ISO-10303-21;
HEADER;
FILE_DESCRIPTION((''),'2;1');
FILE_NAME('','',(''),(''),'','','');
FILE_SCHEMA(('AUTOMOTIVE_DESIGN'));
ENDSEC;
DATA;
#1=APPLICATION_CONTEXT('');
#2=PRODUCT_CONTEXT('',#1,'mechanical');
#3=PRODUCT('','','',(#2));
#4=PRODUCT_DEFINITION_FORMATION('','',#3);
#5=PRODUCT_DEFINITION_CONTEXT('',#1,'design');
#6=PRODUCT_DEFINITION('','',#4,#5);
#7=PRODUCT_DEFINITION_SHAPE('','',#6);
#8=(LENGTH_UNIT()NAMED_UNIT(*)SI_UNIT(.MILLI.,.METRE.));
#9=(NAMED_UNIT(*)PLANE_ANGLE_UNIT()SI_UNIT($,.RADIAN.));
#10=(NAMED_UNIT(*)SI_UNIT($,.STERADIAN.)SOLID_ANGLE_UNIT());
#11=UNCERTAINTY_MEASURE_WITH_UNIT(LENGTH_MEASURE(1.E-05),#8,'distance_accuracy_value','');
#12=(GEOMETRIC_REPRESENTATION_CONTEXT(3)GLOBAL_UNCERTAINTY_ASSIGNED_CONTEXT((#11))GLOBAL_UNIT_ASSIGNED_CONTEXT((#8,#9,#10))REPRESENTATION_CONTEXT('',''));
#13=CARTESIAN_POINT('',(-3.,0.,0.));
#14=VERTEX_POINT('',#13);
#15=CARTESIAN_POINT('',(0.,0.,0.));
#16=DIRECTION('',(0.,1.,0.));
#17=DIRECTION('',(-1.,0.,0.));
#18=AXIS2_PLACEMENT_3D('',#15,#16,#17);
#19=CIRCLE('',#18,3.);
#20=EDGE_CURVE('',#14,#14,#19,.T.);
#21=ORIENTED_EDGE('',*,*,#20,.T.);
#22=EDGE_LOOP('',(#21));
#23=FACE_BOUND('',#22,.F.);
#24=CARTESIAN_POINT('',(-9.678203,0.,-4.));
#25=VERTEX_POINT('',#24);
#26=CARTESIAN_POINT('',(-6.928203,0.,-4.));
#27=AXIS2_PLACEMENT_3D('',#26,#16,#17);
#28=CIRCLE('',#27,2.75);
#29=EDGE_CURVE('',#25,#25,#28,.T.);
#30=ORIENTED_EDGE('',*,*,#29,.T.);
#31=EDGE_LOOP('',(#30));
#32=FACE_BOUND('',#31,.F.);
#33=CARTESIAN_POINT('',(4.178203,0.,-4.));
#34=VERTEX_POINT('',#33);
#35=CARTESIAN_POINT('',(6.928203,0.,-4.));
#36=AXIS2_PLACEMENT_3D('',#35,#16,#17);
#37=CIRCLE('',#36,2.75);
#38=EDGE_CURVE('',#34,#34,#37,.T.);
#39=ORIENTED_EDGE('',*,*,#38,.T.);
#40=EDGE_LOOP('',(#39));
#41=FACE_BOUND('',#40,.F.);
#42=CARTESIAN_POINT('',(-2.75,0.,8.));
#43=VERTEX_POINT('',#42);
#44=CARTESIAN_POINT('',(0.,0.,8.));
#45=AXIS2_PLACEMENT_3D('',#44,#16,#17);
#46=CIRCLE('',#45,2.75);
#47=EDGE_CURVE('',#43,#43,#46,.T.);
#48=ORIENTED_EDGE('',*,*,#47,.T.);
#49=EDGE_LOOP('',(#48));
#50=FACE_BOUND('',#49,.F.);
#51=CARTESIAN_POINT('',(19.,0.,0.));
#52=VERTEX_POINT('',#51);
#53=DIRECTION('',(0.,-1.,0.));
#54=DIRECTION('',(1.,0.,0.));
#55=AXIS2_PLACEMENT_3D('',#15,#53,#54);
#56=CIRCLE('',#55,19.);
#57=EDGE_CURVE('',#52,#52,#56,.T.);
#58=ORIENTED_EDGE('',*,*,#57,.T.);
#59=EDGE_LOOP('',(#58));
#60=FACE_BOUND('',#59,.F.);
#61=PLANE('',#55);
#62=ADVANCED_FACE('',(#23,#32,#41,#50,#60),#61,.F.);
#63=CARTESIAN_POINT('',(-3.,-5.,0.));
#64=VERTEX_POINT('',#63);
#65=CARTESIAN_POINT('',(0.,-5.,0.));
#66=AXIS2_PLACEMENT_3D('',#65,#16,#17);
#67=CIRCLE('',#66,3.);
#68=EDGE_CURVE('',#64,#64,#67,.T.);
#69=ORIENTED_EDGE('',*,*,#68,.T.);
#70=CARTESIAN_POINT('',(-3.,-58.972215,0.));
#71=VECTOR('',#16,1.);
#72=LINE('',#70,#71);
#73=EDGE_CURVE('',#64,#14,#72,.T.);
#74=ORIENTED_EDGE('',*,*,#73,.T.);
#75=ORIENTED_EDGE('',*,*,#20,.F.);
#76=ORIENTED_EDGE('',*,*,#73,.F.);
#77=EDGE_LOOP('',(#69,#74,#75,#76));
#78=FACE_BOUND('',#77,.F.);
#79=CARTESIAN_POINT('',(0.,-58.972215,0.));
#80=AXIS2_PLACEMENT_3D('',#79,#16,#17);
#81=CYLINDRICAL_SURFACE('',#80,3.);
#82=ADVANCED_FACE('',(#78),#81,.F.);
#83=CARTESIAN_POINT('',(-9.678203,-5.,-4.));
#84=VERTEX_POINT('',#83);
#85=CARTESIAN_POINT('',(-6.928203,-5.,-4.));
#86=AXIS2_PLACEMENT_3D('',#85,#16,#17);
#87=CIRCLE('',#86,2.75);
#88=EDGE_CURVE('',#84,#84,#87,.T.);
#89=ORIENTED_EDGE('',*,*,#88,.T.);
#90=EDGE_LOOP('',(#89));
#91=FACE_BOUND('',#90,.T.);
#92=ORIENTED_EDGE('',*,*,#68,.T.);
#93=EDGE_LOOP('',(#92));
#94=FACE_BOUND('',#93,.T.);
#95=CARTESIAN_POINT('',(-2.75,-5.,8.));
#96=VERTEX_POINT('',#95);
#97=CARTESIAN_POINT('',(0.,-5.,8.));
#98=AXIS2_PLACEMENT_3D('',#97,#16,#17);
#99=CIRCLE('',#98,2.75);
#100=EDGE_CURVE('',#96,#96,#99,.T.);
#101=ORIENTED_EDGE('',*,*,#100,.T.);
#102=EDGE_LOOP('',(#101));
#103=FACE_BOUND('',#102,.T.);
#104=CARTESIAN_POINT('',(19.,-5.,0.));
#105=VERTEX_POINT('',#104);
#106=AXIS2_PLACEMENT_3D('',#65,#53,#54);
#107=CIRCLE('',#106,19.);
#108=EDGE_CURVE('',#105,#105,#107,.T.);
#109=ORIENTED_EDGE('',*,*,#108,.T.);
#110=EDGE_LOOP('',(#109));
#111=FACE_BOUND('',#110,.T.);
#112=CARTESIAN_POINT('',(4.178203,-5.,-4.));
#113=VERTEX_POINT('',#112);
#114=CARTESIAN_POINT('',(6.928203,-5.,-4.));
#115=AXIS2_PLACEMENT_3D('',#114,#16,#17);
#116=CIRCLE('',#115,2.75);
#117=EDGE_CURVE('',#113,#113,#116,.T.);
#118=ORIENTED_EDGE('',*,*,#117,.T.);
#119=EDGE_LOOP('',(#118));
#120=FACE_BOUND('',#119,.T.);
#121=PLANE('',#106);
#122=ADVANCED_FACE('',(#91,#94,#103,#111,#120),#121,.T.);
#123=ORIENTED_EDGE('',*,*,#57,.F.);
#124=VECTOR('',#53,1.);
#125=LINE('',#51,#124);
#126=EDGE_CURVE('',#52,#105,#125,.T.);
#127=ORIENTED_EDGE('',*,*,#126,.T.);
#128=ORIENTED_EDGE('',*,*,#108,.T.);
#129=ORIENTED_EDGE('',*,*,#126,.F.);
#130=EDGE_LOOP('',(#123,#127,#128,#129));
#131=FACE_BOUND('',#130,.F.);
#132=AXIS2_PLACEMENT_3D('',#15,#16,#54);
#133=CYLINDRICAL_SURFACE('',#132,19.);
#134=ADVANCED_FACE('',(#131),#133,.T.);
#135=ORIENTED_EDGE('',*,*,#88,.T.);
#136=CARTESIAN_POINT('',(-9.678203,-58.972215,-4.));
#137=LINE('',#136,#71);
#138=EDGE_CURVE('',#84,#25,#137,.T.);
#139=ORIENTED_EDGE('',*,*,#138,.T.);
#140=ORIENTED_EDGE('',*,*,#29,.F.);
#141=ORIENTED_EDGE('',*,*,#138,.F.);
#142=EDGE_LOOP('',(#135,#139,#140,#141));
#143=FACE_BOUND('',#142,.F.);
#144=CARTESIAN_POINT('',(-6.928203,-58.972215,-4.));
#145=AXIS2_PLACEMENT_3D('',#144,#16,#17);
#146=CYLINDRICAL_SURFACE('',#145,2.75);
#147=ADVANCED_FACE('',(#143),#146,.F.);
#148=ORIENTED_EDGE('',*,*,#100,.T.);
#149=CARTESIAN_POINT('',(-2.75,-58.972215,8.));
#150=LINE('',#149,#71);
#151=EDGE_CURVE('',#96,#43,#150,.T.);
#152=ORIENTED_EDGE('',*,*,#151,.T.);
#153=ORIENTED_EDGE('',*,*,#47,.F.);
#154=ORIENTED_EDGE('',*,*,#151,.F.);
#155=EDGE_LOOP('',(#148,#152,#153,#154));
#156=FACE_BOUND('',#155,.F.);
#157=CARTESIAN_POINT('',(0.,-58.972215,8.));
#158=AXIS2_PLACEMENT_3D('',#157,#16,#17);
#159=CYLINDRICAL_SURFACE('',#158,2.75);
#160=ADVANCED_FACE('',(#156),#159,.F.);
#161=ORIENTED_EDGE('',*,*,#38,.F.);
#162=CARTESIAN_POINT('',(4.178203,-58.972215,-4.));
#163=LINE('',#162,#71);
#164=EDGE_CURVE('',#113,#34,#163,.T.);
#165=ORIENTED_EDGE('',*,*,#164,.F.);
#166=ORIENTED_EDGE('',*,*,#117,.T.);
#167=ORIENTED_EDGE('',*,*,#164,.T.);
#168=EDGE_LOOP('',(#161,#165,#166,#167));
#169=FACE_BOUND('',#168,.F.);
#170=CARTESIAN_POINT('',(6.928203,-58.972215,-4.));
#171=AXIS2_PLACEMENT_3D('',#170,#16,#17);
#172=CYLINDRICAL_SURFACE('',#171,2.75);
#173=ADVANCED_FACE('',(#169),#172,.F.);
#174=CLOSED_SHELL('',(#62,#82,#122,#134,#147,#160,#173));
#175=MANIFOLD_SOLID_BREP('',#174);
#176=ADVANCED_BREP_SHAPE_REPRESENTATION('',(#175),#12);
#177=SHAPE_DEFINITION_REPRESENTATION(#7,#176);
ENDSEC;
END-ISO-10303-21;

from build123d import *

# Parameters (mm, degrees)
F0_R     = 19
F1_DEPTH = 5
F4_D     = 5.5
F6_D     = 6


# Not quite as in the source:
# - a feature names something its author has since deleted; it is built from what else it names


with BuildPart() as f1:
    # F0 (on Front) → F1 (new body)
    with BuildSketch(Plane.XZ):
        Circle(F0_R)
    extrude(amount=F1_DEPTH)

    # F4 (through all)
    with Locations(Plane.XZ.offset(5)):
        with Locations((-6.9282032303, -4), (0, 8), (6.9282032303, -4)):
            Hole(F4_D / 2)

    # F6 (through all)
    with Locations(Plane.XZ.offset(5)):
        with Locations((0, 0)):
            Hole(F6_D / 2)


solid = f1.part
